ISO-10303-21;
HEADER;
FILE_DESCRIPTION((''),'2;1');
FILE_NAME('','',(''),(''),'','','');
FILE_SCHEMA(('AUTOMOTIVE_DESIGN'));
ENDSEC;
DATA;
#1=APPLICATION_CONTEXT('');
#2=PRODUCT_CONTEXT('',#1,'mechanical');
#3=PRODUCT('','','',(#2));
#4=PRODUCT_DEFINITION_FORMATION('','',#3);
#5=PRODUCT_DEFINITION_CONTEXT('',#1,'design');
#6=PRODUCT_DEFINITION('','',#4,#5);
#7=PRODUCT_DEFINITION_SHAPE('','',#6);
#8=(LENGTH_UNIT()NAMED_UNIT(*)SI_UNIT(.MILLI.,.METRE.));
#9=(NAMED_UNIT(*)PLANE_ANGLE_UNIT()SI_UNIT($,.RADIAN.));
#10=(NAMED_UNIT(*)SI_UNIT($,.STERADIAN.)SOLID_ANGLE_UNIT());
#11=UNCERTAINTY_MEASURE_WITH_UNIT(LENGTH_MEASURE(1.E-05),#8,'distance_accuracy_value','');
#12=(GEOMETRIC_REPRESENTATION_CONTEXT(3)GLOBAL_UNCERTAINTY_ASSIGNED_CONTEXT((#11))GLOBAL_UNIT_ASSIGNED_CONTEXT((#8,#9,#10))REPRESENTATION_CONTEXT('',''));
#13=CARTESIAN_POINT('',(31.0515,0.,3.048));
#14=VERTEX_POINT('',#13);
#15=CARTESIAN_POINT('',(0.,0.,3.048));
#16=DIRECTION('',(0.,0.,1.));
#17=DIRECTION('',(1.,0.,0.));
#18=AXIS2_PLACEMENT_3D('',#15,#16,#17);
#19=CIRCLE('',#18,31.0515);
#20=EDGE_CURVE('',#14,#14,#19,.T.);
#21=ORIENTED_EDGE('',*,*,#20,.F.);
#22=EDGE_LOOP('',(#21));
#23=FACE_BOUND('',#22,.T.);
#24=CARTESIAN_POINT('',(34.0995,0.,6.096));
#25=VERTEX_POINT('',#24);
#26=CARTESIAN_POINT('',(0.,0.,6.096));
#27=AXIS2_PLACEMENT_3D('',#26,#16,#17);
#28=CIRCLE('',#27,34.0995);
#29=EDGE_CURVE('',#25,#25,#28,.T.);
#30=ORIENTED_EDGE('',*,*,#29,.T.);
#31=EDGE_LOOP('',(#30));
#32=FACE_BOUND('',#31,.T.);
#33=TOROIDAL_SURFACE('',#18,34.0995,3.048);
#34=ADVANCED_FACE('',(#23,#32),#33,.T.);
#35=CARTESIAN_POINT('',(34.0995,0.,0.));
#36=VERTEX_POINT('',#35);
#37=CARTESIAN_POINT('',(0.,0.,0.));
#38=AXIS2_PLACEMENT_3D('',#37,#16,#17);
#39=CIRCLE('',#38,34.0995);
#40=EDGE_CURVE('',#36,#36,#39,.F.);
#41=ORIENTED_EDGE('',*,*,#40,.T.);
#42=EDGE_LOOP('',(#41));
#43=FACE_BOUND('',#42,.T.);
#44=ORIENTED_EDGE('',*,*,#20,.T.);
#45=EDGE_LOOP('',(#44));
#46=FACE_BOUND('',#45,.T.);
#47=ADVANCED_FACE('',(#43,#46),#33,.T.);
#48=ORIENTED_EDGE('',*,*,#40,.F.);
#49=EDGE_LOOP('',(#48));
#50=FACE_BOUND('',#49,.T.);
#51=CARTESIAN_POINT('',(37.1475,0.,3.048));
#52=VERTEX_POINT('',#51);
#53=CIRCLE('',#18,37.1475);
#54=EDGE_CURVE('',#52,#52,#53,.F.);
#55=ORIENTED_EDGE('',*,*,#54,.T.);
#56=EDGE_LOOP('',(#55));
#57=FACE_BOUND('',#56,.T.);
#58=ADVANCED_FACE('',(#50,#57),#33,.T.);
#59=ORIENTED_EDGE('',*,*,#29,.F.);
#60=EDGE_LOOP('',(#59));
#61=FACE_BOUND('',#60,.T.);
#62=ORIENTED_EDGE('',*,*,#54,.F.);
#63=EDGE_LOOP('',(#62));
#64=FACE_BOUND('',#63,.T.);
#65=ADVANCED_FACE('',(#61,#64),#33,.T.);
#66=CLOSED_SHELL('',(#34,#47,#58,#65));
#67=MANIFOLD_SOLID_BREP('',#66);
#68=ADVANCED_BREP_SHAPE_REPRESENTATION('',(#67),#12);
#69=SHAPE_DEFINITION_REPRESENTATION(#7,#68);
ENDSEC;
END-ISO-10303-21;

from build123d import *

# Parameters (mm, degrees)
ESQUISSE1_R             = 37.1475
BOSS_EXTRU_1_DEPTH      = 6.096
ESQUISSE2_R             = 31.0515
ENL_V_MAT_EXTRU_1_DEPTH = 53.886999617
CONG_6_R                = 3.048


with BuildPart() as part:
    # Esquisse1 → Boss.-Extru.1 (new body)
    with BuildSketch(Plane.XY):
        with Locations(Location((0, 0, 0), (0, 0, 180))):
            Circle(ESQUISSE1_R)
    extrude(amount=BOSS_EXTRU_1_DEPTH)

    # Esquisse2 → Enlèv. mat.-Extru.1 (cut, through all)
    with BuildSketch(Plane.XY.offset(6.096)):
        Circle(ESQUISSE2_R)
    extrude(amount=-ENL_V_MAT_EXTRU_1_DEPTH, mode=Mode.SUBTRACT)

    # Congé6
    cong_6_edges = [part.edges().sort_by_distance(p)[0] for p in [
        (37.1475, 0, 0),
        (37.1475, 0, 6.096),
        (-31.0515, 0, 0),
        (-31.0515, 0, 6.096),
    ]]
    fillet(cong_6_edges, radius=CONG_6_R - 0.0001)  # a hair under: the kernel refuses the full size


solid = part.part
